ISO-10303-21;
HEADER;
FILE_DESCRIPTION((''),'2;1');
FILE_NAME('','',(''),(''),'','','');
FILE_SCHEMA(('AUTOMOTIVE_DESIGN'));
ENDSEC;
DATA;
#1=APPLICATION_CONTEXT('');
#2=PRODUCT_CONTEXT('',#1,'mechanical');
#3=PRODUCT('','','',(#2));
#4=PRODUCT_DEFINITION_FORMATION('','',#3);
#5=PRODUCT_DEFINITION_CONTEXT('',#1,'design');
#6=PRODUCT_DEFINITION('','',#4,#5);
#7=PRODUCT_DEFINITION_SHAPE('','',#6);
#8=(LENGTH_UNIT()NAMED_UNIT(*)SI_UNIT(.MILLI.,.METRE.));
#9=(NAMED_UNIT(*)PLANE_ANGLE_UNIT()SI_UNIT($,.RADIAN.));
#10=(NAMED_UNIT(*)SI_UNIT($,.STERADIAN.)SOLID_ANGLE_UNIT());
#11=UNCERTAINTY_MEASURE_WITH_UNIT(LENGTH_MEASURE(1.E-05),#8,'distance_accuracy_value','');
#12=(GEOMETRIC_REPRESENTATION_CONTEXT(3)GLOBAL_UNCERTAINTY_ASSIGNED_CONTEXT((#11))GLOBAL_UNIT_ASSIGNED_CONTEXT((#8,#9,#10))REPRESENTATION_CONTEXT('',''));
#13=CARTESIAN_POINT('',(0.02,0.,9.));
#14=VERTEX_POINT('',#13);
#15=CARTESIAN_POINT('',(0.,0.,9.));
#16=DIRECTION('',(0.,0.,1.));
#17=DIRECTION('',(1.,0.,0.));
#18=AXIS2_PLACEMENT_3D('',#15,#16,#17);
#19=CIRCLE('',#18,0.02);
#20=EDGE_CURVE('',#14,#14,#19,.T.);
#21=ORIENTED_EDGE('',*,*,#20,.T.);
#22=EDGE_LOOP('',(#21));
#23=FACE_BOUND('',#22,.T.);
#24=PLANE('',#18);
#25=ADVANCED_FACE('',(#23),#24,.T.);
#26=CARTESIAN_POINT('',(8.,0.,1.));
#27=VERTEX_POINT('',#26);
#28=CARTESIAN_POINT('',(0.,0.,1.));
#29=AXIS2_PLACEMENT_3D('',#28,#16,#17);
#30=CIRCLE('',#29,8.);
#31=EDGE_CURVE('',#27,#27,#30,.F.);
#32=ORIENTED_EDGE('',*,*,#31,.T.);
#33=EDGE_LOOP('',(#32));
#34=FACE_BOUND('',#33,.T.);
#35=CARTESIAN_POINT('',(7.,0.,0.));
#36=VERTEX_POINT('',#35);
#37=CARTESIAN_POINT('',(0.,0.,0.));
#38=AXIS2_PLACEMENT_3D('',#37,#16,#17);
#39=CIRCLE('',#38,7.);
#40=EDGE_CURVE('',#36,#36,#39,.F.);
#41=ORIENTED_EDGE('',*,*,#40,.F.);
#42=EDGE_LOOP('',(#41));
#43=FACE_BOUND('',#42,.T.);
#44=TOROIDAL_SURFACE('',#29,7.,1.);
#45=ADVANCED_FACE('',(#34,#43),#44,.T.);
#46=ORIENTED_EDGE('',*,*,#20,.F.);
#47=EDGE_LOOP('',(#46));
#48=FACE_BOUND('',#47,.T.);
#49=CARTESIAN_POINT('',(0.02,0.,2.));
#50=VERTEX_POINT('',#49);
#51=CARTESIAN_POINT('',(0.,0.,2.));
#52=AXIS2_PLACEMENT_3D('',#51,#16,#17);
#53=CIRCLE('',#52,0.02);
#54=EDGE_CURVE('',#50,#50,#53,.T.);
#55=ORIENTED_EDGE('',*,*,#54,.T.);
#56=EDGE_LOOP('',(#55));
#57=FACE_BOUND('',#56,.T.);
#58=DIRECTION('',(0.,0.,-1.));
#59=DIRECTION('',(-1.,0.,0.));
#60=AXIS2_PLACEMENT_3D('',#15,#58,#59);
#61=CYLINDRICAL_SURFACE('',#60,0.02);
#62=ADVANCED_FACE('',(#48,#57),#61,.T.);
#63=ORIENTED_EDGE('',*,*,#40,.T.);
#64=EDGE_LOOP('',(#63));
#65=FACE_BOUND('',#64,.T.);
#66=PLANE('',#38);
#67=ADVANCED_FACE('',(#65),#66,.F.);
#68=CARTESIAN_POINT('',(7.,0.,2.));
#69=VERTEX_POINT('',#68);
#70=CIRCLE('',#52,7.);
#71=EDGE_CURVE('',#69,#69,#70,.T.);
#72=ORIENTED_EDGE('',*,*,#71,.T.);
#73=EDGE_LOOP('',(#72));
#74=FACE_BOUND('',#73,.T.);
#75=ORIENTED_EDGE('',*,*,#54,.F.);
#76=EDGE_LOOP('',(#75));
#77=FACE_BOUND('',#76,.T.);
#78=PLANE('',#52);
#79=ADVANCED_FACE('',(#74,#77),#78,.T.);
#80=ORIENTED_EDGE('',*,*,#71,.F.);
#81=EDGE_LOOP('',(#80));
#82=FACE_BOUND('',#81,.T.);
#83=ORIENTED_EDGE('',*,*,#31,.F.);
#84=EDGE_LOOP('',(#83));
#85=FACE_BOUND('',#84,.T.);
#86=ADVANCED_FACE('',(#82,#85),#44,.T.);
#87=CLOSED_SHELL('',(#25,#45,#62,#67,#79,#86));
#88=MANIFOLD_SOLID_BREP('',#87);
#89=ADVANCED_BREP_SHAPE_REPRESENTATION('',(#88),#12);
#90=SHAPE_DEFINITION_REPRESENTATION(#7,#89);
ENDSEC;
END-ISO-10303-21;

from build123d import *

# Parameters (mm, degrees)
SKETCH1_R           = 8
BOSS_EXTRUDE1_DEPTH = 2
FILLET1_R           = 1
SKETCH3_R           = 0.02
BOSS_EXTRUDE2_DEPTH = 7


with BuildPart() as part:
    # Sketch1 → Boss-Extrude1 (new body)
    with BuildSketch(Plane.XY):
        Circle(SKETCH1_R)
    extrude(amount=BOSS_EXTRUDE1_DEPTH)

    # Fillet1
    fillet1_edges = [part.edges().sort_by_distance(p)[0] for p in [
        (-8, 0, 0),
        (-8, 0, 2),
    ]]
    fillet(fillet1_edges, radius=FILLET1_R - 0.0001)  # a hair under: the kernel refuses the full size

    # Sketch3 → Boss-Extrude2 (add)
    with BuildSketch(Plane.XY.offset(2)):
        Circle(SKETCH3_R)
    extrude(amount=BOSS_EXTRUDE2_DEPTH)


solid = part.part
